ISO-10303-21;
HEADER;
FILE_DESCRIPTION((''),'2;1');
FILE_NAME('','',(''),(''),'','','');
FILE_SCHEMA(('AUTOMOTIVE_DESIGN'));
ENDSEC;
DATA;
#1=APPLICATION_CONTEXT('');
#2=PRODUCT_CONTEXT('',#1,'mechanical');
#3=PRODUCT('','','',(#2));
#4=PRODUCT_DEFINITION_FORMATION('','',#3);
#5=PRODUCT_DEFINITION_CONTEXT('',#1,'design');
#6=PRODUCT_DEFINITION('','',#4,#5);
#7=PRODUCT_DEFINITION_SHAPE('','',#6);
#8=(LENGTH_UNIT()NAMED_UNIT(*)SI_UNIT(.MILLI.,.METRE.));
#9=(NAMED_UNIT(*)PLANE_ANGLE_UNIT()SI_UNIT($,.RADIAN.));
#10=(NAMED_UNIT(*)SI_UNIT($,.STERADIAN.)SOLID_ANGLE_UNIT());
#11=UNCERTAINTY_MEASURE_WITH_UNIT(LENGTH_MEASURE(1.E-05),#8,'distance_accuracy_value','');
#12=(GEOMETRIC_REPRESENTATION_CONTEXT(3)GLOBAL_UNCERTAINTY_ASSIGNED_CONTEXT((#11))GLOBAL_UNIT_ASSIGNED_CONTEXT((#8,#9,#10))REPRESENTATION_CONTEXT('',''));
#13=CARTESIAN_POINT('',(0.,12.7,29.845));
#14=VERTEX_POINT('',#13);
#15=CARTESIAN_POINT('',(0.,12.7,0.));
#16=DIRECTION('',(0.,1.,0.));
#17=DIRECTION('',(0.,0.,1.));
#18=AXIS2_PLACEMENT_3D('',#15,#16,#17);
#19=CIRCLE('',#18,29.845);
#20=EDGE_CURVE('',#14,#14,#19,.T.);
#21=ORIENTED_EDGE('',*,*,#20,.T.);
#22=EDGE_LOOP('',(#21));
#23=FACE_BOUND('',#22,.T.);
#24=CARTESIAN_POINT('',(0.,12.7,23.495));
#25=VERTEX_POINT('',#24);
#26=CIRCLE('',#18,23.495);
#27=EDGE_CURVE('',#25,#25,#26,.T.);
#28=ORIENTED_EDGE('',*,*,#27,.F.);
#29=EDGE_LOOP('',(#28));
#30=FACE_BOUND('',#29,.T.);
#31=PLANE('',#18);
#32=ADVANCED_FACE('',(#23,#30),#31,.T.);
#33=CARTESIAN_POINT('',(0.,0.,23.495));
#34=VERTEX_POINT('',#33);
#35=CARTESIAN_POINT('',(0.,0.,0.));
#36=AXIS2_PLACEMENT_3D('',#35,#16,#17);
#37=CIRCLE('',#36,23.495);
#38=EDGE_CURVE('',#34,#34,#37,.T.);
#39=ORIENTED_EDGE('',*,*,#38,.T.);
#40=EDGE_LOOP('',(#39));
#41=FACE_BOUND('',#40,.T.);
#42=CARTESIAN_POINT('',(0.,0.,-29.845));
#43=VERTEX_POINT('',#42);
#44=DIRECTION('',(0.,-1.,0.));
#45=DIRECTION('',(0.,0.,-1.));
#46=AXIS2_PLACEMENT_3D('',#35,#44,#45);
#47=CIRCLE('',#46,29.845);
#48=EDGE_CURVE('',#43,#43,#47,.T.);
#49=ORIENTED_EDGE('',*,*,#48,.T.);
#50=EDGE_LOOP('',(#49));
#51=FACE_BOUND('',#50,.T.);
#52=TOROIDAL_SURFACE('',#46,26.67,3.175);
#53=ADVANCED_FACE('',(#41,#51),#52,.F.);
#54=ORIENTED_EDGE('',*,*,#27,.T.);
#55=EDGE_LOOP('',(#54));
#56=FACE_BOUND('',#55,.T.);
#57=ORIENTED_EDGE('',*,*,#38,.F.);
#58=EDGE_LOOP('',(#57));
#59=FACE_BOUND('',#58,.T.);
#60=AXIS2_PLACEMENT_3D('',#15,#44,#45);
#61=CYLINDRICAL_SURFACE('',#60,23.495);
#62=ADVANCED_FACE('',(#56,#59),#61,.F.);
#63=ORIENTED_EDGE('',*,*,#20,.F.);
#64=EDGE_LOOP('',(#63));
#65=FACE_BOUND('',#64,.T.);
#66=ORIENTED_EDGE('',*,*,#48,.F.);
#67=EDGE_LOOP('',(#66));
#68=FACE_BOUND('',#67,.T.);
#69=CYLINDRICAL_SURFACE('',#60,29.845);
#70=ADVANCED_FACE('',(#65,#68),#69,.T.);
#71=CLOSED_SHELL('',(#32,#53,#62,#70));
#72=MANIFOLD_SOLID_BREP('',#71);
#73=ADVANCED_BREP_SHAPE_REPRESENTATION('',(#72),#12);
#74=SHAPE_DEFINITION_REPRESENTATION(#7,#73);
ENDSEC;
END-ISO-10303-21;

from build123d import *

# Parameters (mm, degrees)
SKETCH1_R           = 29.845
SKETCH1_R_2         = 23.495
BOSS_EXTRUDE2_DEPTH = 12.7


# Read off the part's stored shape, not the designer's step: Cut-Revolve2
with BuildPart() as part:
    # Sketch1 → Boss-Extrude2 (new body)
    with BuildSketch(Plane(origin=(0, 0, 0), x_dir=(1, 0, 0), z_dir=(0, 1, 0))):
        with Locations(Location((0, 0, 0), (0, 0, 270))):
            Circle(SKETCH1_R)
        with Locations(Location((0, 0, 0), (0, 0, 270))):
            Circle(SKETCH1_R_2, mode=Mode.SUBTRACT)
    extrude(amount=BOSS_EXTRUDE2_DEPTH)

    # Cut-Revolve2 outline → Cut-Revolve2 (revolve, cut)
    with BuildSketch(Plane.XY):
        with BuildLine():
            ThreePointArc((29.845, 0), (26.67, 3.175), (23.495, 0))
            Line((23.495, 0), (29.845, 0))
        make_face()
    revolve(axis=Axis((0, 0, 0), (0, 1, 0)), mode=Mode.SUBTRACT)


solid = part.part
